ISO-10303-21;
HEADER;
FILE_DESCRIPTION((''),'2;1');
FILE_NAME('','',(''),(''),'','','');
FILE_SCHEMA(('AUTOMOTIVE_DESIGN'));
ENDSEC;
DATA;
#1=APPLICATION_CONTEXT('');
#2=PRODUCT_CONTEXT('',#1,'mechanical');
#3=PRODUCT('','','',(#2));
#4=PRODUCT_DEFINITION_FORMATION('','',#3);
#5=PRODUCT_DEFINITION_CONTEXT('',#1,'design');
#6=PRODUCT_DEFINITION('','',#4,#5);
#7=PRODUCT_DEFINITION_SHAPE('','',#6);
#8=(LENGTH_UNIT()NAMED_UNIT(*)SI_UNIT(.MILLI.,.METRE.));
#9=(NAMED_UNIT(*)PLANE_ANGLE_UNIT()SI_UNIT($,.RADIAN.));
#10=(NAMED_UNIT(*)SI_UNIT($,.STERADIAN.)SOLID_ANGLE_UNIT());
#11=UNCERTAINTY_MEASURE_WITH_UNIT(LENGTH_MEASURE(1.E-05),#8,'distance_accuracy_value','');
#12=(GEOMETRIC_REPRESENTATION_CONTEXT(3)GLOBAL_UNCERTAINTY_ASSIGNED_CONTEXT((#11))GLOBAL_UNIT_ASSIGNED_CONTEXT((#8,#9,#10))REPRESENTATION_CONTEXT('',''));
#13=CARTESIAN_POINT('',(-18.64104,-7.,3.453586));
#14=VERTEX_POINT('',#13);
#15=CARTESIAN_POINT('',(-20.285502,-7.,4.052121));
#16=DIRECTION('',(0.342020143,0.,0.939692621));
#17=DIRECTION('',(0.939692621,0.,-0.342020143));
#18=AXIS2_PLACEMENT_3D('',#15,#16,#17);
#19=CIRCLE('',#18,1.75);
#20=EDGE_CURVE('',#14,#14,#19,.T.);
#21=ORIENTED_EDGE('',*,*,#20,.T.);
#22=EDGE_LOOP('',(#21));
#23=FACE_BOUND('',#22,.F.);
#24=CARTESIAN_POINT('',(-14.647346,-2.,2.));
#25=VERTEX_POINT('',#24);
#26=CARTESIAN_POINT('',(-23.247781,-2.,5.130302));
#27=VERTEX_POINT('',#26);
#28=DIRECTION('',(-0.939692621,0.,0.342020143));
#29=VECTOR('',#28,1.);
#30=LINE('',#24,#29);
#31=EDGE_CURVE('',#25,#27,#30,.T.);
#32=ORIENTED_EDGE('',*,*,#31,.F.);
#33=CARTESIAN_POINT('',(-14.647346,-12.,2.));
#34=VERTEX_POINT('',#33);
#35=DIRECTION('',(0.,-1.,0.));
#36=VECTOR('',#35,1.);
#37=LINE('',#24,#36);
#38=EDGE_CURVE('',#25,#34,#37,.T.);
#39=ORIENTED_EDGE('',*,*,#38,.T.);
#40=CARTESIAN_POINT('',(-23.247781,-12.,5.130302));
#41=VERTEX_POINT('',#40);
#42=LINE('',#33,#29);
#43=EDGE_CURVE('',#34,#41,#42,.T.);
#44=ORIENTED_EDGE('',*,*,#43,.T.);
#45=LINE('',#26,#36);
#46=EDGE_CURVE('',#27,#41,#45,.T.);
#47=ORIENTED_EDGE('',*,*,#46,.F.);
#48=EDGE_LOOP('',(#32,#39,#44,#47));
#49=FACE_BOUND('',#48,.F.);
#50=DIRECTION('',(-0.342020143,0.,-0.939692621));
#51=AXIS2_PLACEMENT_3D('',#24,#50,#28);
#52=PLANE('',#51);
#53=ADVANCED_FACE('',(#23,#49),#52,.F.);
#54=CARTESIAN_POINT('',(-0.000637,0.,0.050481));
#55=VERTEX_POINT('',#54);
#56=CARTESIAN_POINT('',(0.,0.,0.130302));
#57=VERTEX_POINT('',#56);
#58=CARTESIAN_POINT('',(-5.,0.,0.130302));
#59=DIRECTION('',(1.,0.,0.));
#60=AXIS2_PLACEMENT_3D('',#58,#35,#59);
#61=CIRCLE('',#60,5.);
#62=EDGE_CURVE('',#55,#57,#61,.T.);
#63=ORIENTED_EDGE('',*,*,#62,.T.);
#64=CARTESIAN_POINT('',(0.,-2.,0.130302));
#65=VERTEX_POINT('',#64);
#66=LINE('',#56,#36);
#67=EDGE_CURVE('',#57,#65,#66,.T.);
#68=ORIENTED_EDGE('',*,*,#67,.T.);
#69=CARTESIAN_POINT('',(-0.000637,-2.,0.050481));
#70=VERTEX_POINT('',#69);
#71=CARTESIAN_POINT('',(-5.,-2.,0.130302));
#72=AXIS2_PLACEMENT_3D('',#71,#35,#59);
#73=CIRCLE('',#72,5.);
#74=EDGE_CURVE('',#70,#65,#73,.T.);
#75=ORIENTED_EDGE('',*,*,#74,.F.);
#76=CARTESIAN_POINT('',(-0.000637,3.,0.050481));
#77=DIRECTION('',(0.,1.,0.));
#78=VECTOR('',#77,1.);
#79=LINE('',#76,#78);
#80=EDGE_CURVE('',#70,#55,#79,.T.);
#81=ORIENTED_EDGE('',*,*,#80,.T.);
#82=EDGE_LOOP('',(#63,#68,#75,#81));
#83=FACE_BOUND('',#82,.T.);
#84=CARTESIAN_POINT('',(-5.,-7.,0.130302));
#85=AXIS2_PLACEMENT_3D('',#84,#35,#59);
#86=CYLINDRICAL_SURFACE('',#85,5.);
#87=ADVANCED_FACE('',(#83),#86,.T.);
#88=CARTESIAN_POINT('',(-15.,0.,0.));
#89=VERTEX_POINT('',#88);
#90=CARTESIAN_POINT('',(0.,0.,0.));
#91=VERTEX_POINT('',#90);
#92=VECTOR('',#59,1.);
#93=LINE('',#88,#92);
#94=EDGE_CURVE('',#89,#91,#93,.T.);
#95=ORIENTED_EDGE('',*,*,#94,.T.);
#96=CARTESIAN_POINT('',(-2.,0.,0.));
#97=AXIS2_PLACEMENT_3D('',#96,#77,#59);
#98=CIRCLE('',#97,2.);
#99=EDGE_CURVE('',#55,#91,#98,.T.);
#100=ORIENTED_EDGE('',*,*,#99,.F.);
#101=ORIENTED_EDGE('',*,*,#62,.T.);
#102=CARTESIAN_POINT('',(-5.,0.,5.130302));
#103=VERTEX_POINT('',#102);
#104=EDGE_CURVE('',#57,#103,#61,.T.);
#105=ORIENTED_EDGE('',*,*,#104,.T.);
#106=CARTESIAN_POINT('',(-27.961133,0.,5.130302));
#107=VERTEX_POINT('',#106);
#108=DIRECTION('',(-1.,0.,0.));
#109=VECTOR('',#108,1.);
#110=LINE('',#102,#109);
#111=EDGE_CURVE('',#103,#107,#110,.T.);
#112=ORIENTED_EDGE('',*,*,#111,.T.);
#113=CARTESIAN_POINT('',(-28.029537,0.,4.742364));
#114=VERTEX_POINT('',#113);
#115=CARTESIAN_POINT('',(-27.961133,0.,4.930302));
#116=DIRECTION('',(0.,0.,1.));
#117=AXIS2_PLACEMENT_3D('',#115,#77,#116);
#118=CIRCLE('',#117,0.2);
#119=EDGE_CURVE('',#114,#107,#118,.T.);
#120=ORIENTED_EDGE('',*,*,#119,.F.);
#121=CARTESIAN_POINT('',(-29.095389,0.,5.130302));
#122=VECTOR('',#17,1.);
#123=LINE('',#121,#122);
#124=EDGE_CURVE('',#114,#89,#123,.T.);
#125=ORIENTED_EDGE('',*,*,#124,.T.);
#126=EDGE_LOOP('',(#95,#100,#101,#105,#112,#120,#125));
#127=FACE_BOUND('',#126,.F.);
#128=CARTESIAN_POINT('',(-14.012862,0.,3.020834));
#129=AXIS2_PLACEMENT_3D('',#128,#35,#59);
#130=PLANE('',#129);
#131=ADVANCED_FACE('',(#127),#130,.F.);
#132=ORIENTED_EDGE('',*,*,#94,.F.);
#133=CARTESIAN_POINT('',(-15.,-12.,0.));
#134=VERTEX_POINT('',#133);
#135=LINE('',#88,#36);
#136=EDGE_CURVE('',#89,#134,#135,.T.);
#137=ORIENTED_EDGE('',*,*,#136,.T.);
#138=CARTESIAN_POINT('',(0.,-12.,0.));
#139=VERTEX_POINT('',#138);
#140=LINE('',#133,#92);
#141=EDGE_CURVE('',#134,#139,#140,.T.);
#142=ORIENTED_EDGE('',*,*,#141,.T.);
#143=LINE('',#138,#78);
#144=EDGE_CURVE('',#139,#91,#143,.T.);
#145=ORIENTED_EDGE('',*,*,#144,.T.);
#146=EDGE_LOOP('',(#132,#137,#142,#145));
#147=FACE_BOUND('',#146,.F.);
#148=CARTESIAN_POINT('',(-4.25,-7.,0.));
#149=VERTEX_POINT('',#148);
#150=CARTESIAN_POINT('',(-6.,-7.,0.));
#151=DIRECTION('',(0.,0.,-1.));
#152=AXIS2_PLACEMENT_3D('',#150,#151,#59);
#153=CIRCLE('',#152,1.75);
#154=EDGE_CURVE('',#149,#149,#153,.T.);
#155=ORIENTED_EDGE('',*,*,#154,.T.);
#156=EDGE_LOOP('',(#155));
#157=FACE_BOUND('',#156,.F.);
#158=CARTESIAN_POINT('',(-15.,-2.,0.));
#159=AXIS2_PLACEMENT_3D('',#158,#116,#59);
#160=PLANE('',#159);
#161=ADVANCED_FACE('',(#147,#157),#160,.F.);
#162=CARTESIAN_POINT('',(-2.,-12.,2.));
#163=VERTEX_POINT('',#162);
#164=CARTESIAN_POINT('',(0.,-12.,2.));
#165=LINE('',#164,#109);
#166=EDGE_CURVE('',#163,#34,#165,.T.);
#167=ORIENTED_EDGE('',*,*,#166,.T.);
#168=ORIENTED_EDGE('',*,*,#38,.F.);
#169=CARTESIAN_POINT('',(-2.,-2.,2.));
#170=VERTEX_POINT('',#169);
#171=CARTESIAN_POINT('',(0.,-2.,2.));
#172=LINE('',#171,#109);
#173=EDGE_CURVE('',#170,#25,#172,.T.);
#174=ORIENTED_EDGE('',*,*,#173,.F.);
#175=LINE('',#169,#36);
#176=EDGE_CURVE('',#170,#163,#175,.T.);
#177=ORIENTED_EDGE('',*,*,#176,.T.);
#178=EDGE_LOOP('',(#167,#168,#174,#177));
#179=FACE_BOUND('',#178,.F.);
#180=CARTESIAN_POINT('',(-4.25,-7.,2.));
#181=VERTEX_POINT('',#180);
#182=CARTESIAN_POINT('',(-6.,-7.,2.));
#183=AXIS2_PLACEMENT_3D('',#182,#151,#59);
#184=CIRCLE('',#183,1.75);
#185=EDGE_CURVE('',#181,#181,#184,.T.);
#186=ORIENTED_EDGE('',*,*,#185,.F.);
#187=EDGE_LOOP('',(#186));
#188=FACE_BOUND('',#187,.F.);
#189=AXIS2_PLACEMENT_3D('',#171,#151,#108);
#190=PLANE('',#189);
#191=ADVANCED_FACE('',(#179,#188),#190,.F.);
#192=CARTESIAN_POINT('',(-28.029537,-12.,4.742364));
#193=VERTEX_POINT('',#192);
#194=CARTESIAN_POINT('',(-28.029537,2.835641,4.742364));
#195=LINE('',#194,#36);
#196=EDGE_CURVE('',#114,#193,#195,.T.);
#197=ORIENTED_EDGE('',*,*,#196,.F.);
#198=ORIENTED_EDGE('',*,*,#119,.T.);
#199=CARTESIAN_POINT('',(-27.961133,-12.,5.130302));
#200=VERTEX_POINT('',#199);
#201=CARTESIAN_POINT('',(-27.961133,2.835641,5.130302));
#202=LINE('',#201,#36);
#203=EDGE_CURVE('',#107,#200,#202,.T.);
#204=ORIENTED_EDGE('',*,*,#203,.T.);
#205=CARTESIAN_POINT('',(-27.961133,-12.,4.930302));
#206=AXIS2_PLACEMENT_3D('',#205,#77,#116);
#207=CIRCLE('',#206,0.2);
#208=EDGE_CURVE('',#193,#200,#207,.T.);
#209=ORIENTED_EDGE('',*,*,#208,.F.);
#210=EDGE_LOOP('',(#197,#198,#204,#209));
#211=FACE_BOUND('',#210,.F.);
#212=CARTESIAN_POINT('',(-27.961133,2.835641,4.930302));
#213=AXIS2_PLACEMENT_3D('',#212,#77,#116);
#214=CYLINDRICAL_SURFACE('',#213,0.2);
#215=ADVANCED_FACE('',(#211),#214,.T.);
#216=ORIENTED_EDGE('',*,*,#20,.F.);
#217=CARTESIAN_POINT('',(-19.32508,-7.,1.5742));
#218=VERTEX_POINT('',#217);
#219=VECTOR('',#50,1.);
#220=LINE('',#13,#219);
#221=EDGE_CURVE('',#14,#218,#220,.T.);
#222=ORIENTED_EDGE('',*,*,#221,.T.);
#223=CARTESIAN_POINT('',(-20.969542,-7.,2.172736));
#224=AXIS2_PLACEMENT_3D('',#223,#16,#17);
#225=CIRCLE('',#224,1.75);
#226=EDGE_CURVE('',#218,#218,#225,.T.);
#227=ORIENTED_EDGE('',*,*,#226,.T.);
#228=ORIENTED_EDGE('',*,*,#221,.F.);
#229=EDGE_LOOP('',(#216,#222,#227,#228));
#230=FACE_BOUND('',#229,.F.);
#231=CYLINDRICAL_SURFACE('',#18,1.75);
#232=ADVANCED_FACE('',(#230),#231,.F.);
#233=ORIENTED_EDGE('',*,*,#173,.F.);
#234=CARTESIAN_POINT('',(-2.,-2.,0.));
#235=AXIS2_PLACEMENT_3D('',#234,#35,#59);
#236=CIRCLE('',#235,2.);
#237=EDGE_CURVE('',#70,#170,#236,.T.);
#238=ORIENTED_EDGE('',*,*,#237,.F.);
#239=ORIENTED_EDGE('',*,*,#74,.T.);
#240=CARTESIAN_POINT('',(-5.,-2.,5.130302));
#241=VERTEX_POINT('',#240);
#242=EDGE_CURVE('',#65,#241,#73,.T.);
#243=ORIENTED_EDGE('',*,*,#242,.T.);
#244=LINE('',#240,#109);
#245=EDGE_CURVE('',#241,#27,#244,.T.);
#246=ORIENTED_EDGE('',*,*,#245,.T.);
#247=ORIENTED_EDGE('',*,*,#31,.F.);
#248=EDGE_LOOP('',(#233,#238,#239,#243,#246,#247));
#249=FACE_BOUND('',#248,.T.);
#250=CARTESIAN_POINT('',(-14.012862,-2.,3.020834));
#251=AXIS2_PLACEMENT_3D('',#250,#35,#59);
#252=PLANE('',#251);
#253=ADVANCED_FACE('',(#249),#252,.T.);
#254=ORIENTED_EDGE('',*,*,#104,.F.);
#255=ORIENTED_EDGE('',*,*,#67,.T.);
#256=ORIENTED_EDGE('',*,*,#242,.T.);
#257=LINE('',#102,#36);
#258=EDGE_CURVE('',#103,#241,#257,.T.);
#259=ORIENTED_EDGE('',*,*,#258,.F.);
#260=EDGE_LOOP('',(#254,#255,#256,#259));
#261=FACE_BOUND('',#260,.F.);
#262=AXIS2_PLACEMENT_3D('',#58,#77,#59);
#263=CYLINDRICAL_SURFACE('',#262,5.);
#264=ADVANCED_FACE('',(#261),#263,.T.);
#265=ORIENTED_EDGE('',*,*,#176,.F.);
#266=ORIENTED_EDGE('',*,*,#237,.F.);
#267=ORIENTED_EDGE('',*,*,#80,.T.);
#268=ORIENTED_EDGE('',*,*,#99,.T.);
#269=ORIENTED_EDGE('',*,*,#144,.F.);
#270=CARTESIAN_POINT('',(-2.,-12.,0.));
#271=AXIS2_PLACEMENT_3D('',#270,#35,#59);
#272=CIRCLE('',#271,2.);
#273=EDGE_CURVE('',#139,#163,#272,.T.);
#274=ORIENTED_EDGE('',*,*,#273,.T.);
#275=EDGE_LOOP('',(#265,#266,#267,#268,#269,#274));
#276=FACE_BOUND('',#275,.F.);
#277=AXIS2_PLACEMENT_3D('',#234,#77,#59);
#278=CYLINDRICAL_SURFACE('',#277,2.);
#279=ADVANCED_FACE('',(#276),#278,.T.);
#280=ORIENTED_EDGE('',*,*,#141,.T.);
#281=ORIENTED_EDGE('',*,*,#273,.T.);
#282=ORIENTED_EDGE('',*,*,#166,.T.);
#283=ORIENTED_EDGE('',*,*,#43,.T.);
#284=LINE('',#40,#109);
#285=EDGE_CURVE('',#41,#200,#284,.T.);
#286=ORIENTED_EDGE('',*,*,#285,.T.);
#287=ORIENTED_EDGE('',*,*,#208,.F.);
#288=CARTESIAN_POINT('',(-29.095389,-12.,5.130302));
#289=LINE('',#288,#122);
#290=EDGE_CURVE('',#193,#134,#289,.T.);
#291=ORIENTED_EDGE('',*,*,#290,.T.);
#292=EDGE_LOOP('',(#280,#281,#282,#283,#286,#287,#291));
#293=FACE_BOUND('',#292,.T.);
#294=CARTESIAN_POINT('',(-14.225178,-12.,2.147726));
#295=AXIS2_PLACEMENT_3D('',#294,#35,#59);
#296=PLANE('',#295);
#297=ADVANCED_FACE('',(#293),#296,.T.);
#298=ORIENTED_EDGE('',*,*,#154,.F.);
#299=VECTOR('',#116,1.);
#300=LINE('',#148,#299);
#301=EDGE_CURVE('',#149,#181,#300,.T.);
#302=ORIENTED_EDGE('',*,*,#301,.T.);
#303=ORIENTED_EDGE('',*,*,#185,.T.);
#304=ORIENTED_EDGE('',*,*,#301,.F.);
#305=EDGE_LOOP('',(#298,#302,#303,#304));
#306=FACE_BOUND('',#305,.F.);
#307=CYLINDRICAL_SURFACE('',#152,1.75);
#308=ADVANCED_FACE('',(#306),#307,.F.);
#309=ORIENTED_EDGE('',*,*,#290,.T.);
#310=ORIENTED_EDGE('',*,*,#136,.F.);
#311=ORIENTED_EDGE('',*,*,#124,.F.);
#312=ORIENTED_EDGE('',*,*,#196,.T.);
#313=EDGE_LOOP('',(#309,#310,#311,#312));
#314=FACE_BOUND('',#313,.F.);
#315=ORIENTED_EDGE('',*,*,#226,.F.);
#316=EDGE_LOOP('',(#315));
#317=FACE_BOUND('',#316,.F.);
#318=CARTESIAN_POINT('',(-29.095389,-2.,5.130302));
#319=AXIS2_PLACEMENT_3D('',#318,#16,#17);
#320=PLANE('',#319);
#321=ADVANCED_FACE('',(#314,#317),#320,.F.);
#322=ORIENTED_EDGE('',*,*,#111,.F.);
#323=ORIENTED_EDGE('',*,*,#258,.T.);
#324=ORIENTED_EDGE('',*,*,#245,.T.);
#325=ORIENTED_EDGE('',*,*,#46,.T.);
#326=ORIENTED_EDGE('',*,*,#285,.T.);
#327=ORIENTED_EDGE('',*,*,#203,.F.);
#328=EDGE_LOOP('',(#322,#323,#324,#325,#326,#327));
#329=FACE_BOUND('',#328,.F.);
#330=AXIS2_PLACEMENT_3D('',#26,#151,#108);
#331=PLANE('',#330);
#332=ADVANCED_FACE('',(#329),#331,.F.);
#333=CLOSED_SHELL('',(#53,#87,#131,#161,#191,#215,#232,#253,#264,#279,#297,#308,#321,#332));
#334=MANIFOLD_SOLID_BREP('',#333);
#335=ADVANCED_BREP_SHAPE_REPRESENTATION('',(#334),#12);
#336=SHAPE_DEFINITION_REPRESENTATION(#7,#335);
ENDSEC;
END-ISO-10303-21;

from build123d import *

# Parameters (mm, degrees)
F1_DEPTH    = 2
F3_DEPTH    = 10
F4_T1_DEPTH = 17.6712818196
F5_R        = 1.75
F6_DEPTH    = 2
F7_R        = 1.75
F8_DEPTH    = 2
F9_T1_DEPTH = 15
F9_T6_DEPTH = 20
F9_S7_R     = 5
F9_T8_DEPTH = 12


# Not quite as in the source:
# - a fillet or chamfer that OpenCascade refuses, or shapes differently, is made with other operations: its cross-section is extruded or revolved along the edge and cut away or added


with BuildPart() as f1:
    # F0 (on Front) → F1 (new body)
    with BuildSketch(Plane.XZ):
        with BuildLine():
            Line((-15, 0), (0, 0))
            Line((0, 0), (0, 0.1303021499))
            ThreePointArc((0, 0.1303021499), (-1.4644660941, 3.6658360558), (-5, 5.1303021499))
            Line((-5, 5.1303021499), (-29.0953893118, 5.1303021499))
            Line((-29.0953893118, 5.1303021499), (-15, 0))
        make_face()
    extrude(amount=F1_DEPTH)

    # F2 (on face) → F3 (join)
    with BuildSketch(Plane.XZ.offset(2)):
        Polygon((-23.2477805115, 5.1303021499), (-29.0953893118, 5.1303021499), (-15, 0), (0, 0), (0, 2), (-14.6473460386, 2), align=None)
    extrude(amount=F3_DEPTH)

    # F4: fillet of radius 0.2 on 1 edges, made by hand

    # F4_s2 → F4_t1 (cut)
    with BuildSketch(Plane.XZ.offset(-2.8356409098)):
        with BuildLine():
            ThreePointArc((-27.9611329479, 5.1303021499), (-28.1580944985, 4.9650317854), (-28.0295369765, 4.7423636257))
            Line((-28.0295369765, 4.7423636257), (-29.0953893118, 5.1303021499))
            Line((-29.0953893118, 5.1303021499), (-27.9611329479, 5.1303021499))
        make_face()
    extrude(amount=F4_T1_DEPTH, mode=Mode.SUBTRACT)

    # F5 (on face) → F6 (cut, through all)
    with BuildSketch(Plane(origin=(-1.07062639, 0, -2.9415218311), x_dir=(0.9396926208, 0, -0.3420201433), z_dir=(0.3420201433, 0, 0.9396926208))):
        with Locations((-20.4480432732, -7)):
            Circle(F5_R)
    extrude(amount=-F6_DEPTH, mode=Mode.SUBTRACT)

    # F7 (on face) → F8 (cut, through all)
    with BuildSketch(Plane(origin=(0, 0, 0), x_dir=(1, 0, 0), z_dir=(0, 0, -1))):
        with Locations((-6, 7)):
            Circle(F7_R)
    extrude(amount=-F8_DEPTH, mode=Mode.SUBTRACT)

    # F9: fillet of radius 2 on 1 edges, made by hand

    # F9_s2 → F9_t1 (cut)
    with BuildSketch(Plane.XZ.offset(2)):
        with BuildLine():
            ThreePointArc((0, 0), (-0.5857864376, 1.4142135624), (-2, 2))
            Line((-2, 2), (0, 2))
            Line((0, 2), (0, 0))
        make_face()
    extrude(amount=F9_T1_DEPTH, mode=Mode.SUBTRACT)


with BuildPart() as f9_tool4:
    # F9_s5 → F9_t6 (new body)
    with BuildSketch(Plane.XZ.offset(-3)):
        with BuildLine():
            ThreePointArc((0, 0), (-0.5857864376, 1.4142135624), (-2, 2))
            Line((-2, 2), (0, 2))
            Line((0, 2), (0, 0))
        make_face()
    extrude(amount=F9_T6_DEPTH)

    # F9_s7 → F9_t8 (cut, symmetric)
    with BuildSketch(Plane.XZ.offset(7)):
        with Locations((-5, 0.1303021499)):
            Circle(F9_S7_R)
    extrude(amount=F9_T8_DEPTH, both=True, mode=Mode.SUBTRACT)


with BuildPart() as f1_1:
    add(f1.part)

    # F9_t3: cut F9_tool4
    add(f9_tool4.part, mode=Mode.SUBTRACT)


solid = f1_1.part
